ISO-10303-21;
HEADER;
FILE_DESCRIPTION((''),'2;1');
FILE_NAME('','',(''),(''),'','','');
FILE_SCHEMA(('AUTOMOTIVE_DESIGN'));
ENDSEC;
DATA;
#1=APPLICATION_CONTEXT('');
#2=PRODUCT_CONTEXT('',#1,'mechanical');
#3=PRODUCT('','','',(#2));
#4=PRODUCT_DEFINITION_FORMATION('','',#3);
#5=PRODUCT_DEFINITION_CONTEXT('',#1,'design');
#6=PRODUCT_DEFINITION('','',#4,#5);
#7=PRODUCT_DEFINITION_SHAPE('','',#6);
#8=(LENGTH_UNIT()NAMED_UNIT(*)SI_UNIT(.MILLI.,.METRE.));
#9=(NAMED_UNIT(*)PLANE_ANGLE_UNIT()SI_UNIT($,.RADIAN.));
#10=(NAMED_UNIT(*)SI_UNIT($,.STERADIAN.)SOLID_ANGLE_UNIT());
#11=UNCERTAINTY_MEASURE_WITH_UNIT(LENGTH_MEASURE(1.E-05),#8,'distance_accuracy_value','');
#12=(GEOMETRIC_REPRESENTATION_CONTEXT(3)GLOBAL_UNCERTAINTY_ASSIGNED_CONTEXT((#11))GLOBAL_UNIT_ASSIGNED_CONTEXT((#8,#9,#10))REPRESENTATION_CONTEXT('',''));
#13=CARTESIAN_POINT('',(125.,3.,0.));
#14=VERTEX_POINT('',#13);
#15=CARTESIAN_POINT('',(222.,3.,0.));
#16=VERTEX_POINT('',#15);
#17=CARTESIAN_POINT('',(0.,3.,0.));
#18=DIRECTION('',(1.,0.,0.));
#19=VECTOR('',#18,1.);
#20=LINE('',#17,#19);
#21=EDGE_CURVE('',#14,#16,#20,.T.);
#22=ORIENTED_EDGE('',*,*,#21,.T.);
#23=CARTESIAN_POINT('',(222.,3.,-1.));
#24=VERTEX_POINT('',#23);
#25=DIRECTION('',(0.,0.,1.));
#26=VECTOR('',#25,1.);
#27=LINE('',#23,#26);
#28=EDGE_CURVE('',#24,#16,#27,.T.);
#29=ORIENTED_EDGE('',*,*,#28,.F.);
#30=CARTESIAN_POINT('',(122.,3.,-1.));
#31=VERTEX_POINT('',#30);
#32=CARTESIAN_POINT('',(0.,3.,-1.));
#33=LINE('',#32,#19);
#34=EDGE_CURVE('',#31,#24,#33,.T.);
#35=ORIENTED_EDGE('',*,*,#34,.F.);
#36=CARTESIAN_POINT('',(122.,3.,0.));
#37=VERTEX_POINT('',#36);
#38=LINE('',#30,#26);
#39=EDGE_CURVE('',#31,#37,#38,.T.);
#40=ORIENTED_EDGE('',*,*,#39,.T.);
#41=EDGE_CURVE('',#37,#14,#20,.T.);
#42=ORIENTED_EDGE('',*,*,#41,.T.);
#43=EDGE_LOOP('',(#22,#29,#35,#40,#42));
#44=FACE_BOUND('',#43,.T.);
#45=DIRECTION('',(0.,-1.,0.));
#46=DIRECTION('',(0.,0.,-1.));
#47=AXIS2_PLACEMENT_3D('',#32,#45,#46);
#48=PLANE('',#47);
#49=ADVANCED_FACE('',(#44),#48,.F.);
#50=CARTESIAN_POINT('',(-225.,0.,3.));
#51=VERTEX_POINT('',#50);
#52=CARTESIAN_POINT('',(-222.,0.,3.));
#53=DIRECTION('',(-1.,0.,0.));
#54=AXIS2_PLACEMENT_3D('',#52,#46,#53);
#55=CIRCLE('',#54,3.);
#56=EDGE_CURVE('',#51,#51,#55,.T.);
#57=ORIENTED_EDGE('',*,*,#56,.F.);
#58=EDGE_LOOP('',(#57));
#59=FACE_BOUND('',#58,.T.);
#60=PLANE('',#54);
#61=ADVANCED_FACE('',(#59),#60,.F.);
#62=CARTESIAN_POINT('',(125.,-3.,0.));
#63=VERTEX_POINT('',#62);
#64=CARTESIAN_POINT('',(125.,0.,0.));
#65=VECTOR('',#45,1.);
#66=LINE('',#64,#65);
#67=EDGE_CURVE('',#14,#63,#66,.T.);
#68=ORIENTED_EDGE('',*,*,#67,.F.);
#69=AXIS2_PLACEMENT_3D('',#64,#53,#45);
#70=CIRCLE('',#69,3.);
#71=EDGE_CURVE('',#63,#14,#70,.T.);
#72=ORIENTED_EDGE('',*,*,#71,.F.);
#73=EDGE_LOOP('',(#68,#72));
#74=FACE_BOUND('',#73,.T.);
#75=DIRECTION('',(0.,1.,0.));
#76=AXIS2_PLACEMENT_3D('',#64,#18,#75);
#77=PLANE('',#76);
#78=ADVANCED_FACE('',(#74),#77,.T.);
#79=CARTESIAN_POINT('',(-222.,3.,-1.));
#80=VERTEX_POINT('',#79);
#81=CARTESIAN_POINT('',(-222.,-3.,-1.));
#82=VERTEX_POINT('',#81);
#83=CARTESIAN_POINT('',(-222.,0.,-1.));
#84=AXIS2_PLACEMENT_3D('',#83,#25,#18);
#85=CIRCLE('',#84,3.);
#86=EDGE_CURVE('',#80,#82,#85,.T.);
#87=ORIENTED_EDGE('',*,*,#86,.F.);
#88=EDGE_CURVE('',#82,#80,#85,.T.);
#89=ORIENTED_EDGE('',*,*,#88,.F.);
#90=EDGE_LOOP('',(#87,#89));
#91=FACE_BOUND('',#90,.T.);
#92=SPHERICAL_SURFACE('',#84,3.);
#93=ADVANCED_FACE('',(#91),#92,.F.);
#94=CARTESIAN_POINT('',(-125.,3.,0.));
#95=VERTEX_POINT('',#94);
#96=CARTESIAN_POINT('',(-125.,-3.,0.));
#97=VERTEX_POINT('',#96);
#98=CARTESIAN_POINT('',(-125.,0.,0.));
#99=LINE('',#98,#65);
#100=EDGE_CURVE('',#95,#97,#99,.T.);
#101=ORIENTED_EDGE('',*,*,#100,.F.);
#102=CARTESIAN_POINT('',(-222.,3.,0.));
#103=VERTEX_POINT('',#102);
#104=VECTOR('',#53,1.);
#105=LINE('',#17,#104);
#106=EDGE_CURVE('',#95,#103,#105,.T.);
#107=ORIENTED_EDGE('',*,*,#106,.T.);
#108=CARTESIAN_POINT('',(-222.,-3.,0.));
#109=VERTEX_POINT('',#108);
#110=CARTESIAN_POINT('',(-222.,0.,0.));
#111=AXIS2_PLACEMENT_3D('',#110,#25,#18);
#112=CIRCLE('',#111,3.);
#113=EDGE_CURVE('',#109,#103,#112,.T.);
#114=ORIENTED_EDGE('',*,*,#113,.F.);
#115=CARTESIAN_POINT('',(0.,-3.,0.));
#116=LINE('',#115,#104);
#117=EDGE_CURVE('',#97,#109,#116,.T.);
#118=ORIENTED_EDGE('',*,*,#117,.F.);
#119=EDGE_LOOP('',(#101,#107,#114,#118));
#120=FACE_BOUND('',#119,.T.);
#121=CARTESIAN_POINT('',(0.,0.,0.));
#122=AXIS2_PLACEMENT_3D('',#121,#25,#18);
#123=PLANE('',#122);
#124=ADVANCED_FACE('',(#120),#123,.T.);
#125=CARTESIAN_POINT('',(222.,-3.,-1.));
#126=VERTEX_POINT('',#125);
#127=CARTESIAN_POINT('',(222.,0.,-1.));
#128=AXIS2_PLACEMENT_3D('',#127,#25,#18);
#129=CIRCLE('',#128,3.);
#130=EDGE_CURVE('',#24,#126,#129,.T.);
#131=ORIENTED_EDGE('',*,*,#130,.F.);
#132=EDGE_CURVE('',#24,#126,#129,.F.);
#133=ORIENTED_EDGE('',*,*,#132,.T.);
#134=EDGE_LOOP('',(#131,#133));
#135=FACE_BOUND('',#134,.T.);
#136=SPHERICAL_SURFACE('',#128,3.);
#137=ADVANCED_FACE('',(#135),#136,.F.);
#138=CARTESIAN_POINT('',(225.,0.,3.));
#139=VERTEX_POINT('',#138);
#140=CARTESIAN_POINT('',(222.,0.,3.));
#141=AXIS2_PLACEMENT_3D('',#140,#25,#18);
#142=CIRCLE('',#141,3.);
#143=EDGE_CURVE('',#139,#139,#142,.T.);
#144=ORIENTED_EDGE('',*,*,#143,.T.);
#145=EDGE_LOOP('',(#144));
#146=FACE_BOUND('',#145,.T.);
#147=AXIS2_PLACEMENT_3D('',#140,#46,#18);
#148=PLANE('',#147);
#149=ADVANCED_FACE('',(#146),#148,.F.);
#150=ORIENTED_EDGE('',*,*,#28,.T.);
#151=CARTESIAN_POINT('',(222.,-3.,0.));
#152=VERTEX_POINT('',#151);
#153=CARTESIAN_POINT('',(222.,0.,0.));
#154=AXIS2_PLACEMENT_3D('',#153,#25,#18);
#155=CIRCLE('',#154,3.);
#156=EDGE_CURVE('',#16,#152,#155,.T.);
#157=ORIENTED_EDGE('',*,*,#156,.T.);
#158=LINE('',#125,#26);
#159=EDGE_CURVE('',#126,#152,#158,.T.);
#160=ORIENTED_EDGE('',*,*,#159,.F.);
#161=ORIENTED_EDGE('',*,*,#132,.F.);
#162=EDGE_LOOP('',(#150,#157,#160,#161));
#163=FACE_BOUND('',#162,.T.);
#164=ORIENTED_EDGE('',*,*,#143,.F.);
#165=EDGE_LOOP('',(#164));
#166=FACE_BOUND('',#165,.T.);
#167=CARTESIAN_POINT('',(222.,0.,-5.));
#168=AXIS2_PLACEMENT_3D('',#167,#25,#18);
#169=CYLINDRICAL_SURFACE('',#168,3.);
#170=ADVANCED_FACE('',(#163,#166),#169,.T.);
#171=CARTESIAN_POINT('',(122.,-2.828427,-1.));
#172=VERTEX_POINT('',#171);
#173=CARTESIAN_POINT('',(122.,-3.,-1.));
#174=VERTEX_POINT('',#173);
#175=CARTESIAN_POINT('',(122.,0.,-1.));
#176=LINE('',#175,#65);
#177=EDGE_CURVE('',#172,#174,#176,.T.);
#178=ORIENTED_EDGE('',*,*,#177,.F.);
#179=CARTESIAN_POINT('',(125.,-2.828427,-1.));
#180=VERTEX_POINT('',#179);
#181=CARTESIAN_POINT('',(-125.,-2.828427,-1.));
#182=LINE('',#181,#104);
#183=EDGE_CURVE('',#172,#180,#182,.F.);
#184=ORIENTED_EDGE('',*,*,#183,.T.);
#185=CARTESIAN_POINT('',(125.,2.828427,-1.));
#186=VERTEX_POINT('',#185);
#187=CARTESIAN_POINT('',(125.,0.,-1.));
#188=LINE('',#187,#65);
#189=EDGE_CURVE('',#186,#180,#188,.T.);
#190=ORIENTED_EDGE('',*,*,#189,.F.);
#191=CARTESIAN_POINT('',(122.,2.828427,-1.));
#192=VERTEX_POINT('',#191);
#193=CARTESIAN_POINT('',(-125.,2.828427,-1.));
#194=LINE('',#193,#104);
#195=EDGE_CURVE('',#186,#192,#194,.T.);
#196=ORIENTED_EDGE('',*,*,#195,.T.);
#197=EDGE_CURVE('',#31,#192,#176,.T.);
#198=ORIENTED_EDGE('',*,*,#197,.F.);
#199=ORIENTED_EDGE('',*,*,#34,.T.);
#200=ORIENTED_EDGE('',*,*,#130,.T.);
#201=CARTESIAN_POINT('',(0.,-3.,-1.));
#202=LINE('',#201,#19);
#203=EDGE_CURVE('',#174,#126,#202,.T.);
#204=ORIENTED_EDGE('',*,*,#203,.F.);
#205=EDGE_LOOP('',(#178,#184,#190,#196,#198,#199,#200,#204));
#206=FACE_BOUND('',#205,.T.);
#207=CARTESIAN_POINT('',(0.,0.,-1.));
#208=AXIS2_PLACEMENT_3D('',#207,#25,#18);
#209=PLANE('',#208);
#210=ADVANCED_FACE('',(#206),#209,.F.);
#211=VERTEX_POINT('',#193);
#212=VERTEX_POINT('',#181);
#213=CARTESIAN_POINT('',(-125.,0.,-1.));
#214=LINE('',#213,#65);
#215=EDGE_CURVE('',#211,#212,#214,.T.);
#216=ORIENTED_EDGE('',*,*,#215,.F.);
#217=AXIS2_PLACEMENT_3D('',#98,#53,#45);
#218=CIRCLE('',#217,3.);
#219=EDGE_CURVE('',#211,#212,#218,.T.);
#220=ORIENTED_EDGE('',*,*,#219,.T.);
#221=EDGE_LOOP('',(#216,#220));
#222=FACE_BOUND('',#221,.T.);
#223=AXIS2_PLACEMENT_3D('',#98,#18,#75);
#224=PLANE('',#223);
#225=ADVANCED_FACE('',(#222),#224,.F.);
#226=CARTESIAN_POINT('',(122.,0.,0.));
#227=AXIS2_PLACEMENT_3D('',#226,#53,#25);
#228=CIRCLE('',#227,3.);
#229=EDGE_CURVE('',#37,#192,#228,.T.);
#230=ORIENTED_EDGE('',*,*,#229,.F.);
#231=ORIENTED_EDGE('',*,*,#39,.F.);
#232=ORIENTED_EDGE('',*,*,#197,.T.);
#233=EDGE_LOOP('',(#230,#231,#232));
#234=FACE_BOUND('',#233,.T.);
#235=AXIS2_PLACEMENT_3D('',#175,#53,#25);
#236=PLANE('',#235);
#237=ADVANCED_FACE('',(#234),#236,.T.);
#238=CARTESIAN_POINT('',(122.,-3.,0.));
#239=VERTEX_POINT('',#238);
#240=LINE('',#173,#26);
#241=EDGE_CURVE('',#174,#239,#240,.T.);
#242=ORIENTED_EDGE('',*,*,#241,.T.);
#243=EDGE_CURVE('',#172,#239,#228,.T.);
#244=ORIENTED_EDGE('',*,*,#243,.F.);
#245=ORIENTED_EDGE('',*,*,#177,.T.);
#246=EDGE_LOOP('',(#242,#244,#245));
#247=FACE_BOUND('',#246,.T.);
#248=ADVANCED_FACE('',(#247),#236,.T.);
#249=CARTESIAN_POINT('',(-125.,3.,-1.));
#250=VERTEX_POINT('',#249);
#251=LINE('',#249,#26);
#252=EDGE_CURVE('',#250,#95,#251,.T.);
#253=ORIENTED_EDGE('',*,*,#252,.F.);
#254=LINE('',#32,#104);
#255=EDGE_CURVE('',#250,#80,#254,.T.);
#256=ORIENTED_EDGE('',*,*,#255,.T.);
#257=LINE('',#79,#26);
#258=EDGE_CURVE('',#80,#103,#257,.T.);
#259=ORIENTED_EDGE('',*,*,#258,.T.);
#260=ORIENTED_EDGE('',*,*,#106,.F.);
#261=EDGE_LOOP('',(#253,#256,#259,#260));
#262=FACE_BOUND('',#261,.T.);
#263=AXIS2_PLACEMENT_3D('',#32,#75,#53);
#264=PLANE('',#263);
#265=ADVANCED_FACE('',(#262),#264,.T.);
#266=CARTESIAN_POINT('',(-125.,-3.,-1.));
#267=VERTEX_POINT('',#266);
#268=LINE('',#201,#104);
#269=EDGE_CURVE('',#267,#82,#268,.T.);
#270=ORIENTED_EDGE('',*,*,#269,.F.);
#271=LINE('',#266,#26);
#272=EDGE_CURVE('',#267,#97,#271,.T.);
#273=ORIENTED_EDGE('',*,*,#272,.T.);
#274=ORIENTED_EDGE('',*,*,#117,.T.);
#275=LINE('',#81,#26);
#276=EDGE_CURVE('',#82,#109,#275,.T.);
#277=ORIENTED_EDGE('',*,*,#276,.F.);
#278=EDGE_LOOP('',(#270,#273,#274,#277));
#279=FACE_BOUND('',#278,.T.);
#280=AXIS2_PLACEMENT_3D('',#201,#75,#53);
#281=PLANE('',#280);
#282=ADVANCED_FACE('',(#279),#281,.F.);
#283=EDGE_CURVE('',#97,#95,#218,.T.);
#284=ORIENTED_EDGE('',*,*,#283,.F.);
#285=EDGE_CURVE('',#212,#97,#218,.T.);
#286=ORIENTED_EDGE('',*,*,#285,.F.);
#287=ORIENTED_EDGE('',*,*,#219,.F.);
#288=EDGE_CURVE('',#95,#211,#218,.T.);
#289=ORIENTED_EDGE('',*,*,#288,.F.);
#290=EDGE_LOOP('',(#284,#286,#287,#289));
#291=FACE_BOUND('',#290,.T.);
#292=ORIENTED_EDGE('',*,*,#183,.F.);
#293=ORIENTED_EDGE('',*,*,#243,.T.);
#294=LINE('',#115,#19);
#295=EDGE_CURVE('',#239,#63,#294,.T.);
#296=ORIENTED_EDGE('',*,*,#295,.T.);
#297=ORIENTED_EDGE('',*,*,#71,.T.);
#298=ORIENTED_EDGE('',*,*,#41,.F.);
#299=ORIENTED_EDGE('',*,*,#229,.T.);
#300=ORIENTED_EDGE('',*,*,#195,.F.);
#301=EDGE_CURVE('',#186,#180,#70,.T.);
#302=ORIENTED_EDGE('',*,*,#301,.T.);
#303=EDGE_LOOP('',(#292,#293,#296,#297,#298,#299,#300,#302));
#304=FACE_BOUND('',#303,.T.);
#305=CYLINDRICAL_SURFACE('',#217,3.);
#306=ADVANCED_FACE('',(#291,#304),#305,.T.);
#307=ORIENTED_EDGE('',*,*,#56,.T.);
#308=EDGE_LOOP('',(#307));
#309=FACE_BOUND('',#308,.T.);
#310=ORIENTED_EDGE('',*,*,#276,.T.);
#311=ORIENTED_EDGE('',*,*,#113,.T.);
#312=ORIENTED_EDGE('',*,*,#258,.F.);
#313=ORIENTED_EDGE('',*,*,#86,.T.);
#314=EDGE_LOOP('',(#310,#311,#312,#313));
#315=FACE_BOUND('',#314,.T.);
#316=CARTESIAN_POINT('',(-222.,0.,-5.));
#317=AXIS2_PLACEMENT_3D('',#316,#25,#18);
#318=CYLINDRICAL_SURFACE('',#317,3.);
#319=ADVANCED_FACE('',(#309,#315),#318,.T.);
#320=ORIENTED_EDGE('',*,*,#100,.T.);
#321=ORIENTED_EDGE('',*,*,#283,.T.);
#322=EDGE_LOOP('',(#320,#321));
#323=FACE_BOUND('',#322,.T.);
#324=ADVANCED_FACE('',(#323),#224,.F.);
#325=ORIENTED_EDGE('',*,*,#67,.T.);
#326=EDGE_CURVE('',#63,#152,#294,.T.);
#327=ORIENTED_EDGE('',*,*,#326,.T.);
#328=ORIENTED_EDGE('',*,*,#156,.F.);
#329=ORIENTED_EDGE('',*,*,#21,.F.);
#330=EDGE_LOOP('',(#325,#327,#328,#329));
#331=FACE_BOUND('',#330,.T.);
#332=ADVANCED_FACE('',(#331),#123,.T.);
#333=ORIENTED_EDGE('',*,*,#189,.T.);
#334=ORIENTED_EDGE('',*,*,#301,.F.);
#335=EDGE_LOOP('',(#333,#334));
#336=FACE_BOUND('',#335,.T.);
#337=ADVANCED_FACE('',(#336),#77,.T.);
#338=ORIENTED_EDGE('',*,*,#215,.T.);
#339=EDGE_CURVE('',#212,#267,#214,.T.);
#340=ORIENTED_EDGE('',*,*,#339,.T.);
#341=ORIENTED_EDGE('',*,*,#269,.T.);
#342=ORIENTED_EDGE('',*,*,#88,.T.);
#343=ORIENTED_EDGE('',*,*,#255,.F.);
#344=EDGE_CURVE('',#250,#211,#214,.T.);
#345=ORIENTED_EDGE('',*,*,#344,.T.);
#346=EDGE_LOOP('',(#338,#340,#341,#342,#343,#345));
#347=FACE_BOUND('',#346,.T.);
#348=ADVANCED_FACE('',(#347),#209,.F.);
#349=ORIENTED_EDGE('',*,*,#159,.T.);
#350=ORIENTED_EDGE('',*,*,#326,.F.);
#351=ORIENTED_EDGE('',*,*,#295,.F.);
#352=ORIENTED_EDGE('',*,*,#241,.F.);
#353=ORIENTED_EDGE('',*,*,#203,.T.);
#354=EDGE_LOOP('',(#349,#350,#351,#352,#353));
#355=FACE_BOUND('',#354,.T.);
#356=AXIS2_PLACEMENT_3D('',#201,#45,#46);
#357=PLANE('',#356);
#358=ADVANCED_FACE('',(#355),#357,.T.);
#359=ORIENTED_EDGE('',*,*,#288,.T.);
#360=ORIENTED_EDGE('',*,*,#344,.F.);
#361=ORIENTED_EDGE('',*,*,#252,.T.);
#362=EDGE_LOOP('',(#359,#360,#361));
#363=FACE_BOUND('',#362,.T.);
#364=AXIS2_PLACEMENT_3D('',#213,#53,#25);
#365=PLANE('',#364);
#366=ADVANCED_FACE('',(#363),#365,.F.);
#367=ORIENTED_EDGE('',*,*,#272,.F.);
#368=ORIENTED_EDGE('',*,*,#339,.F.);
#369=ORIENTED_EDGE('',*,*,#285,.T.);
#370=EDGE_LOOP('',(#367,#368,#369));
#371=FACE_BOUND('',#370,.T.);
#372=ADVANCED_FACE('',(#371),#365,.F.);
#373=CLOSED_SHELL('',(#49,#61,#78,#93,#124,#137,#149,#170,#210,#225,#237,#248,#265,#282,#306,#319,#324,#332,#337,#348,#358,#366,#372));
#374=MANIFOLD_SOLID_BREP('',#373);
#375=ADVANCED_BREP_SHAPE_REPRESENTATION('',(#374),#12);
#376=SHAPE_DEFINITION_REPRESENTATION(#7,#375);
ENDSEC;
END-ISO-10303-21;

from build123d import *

# Parameters (mm, degrees)
SKETCH8_W               = 97
SKETCH8_H               = 6
SKETCH8_W_2             = 100
BOSS_EXTRUDE1_DEPTH     = 1
CUT_EXTRUDE2_DEPTH      = 223.056299168
CUT_EXTRUDE2_DEPTH_BACK = 223.056299168
SKETCH20_R              = 3
SKETCH20_3_R            = 3
BOSS_EXTRUDE2_DEPTH     = 4


# Read off the part's stored shape, not the designer's step: Cut-Revolve4
with BuildPart() as part:
    # Sketch1 → Revolve2 (revolve)
    with BuildSketch(Plane.XY, mode=Mode.PRIVATE) as revolve2_sk:
        Polygon((-125, 0), (125, 0), (125, 3), (0, 3), (-125, 3), align=None)
    revolve(revolve2_sk.sketch.rotate(Axis((-125, 0, 0), (1, 0, 0)), 180), axis=Axis((-125, 0, 0), (1, 0, 0)))

    # Sketch8 → Boss-Extrude1 (add)
    with BuildSketch(Plane.XY):
        with Locations((-173.5, 0)):
            Rectangle(SKETCH8_W, SKETCH8_H)
        with Locations((172, 0)):
            Rectangle(SKETCH8_W_2, SKETCH8_H)
    extrude(amount=-BOSS_EXTRUDE1_DEPTH)

    # Sketch20 → Cut-Extrude2 (cut, two sides: drawn at the far end of the back side and taken through both)
    with BuildSketch(Plane(origin=(0, 0, -1), x_dir=(-1, 0, 0), z_dir=(0, 0, -1)).offset(-CUT_EXTRUDE2_DEPTH_BACK)):
        with Locations((222, 0)):
            Circle(SKETCH20_R)
        with Locations((-222, 0)):
            Circle(SKETCH20_R)
    extrude(amount=CUT_EXTRUDE2_DEPTH + CUT_EXTRUDE2_DEPTH_BACK, mode=Mode.SUBTRACT)

    # Sketch20<3> → Boss-Extrude2 (add, symmetric)
    with BuildSketch(Plane(origin=(0, 0, -1), x_dir=(-1, 0, 0), z_dir=(0, 0, -1))):
        with Locations((222, 0)):
            Circle(SKETCH20_3_R)
    boss_extrude2 = extrude(amount=BOSS_EXTRUDE2_DEPTH, both=True)

    # Sketch22 → Cut-Revolve3 (revolve, cut)
    with BuildSketch(Plane(origin=(0, 0, -1), x_dir=(-1, 0, 0), z_dir=(0, 0, -1))):
        with BuildLine():
            Line((222, 3), (222, -3))
            ThreePointArc((222, -3), (225, 0), (222, 3))
        make_face()
    revolve(axis=Axis((-222, 3, -1), (0, -1, 0)), mode=Mode.SUBTRACT)


with BuildPart() as cut_revolve3_kept_piece:
    # of the separate pieces the step leaves, the one the design keeps (cut_revolve3_pieces_kept)
    add(part.part.solids().sort_by_distance((-225, 0, 3))[0])

    # Mirror3: Boss-Extrude2 across plane
    add(boss_extrude2.mirror(Plane(origin=(0, 0, 0), x_dir=(0, 0, 1), z_dir=(1, 0, 0))))

    # Cut-Revolve4 outline → Cut-Revolve4 (revolve, cut)
    with BuildSketch(Plane(origin=(222, 0, 0), x_dir=(1, 0, 0), z_dir=(0, -1, 0))):
        with BuildLine():
            Line((0, 2), (0, -5))
            Line((0, -5), (3, -5))
            Line((3, -5), (3, -1.000000003))
            ThreePointArc((3, -1.000000003), (2.121320345, 1.121320342), (0, 2))
        make_face()
    revolve(axis=Axis((222, 0, 0), (0, 0, 1)), mode=Mode.SUBTRACT)


solid = cut_revolve3_kept_piece.part
